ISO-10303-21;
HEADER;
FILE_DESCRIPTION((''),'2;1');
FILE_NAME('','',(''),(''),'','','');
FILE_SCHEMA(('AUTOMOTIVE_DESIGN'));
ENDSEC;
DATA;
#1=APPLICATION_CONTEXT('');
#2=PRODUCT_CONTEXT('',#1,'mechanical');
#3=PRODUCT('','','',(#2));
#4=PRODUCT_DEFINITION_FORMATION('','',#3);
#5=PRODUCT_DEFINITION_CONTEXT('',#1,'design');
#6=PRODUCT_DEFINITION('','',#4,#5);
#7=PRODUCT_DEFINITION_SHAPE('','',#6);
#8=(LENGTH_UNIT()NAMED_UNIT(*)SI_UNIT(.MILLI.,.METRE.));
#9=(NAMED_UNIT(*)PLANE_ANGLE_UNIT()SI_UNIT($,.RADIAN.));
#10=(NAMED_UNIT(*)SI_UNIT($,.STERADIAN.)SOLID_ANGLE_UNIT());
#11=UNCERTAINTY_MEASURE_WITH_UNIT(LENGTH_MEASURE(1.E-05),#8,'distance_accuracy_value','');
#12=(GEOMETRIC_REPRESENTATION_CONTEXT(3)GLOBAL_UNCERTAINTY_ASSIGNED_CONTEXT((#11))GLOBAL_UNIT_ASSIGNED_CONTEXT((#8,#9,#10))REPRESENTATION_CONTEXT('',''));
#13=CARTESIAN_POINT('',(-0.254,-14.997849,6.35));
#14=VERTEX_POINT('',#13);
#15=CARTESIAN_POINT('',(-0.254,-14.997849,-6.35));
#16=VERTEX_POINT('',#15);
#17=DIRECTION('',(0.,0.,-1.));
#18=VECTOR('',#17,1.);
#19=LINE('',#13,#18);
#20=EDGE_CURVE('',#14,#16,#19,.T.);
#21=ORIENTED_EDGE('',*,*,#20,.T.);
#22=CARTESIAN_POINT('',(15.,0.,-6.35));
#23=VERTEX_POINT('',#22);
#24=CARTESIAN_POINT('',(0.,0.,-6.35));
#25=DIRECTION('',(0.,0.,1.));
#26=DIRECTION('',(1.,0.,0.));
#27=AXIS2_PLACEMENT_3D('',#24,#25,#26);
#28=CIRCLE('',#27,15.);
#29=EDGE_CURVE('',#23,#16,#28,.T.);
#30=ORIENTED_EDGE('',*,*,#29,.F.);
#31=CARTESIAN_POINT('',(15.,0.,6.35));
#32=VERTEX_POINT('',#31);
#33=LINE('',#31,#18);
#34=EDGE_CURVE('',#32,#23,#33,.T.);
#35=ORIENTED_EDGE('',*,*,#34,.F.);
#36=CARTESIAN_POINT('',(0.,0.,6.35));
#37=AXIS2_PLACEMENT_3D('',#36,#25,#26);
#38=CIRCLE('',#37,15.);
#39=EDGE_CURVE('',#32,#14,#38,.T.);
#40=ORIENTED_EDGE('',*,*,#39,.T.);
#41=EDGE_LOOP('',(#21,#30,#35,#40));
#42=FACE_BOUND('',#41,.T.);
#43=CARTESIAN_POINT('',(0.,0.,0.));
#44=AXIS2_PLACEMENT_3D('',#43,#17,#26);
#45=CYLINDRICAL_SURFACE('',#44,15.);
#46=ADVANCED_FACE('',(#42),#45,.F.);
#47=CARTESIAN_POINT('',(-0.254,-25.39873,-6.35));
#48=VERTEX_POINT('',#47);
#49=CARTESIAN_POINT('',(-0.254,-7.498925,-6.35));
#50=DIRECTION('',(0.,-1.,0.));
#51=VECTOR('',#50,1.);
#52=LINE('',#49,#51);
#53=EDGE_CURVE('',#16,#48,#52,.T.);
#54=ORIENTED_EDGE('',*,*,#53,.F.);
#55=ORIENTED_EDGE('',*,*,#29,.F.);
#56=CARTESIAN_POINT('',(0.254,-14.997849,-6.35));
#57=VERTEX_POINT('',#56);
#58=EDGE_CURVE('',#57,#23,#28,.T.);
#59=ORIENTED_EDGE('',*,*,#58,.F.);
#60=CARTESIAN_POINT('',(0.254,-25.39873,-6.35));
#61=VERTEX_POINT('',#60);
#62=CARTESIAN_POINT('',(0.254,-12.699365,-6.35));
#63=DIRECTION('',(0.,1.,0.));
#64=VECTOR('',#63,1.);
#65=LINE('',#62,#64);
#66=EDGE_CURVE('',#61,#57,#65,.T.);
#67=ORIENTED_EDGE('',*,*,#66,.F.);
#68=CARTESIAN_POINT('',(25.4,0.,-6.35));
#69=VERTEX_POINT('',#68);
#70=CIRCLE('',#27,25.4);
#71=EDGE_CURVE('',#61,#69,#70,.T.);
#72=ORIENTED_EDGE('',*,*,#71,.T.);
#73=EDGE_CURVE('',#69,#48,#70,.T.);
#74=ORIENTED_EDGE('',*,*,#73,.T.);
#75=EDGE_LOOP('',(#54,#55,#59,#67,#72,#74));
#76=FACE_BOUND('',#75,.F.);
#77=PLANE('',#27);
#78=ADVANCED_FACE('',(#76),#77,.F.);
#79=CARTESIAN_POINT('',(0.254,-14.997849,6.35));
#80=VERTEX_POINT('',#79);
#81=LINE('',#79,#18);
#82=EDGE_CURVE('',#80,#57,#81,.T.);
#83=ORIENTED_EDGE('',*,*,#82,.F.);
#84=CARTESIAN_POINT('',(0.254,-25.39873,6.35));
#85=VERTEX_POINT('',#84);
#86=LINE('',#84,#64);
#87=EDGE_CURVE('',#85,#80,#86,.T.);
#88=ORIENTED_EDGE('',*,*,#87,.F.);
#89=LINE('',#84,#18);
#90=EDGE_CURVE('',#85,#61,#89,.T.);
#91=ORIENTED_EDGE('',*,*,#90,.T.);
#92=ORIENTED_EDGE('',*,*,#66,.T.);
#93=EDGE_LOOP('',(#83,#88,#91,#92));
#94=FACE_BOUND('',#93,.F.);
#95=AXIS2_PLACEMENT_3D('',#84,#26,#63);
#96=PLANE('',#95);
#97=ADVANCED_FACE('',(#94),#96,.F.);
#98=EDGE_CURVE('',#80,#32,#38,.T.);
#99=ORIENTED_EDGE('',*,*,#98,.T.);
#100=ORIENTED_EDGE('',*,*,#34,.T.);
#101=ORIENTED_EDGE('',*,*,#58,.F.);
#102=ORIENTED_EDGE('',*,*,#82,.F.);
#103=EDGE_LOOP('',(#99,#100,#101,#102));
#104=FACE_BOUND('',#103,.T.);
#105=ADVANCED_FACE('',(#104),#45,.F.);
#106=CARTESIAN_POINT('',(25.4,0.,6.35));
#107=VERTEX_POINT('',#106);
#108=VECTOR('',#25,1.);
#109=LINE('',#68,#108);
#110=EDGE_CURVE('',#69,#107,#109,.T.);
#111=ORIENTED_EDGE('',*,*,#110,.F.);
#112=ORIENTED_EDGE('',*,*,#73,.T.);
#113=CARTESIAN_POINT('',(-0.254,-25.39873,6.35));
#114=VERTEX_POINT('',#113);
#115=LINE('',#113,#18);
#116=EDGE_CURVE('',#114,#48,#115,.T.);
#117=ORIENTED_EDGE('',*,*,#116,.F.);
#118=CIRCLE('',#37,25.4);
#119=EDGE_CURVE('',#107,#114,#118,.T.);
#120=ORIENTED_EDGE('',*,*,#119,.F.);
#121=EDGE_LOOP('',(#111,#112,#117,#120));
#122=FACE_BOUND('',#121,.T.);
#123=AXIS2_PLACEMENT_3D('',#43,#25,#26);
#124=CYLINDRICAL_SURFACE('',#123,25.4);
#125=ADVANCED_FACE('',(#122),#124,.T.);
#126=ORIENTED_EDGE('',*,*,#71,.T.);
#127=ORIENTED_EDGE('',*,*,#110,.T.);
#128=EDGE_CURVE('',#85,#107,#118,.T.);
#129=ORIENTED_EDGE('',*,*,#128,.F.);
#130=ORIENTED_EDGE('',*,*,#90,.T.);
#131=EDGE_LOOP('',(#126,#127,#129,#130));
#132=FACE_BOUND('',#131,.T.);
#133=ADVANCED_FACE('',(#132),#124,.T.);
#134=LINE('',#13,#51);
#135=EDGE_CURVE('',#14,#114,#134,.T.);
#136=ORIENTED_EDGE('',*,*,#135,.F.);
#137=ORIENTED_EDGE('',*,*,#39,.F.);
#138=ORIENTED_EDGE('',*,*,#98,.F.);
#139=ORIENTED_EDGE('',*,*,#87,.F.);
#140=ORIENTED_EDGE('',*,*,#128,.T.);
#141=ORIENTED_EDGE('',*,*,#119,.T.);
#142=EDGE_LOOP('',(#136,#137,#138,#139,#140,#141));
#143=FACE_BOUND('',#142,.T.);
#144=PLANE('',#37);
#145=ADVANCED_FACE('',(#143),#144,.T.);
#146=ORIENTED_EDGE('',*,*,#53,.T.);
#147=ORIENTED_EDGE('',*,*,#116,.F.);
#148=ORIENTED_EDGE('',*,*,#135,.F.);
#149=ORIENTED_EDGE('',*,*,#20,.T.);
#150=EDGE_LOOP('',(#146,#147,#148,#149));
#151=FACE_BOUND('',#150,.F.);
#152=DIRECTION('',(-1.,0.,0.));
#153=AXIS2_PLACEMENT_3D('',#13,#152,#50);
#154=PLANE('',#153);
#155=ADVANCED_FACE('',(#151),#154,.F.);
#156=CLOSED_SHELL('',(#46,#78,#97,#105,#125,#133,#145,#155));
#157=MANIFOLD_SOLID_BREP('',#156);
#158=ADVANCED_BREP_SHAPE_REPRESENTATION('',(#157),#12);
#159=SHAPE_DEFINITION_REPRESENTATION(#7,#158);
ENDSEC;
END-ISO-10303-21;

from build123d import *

# Parameters (mm, degrees)
F0_R     = 25.4
F0_R_2   = 15
F1_DEPTH = 6.35
F3_DEPTH = 12.701


with BuildPart() as f1:
    # F0 (on Top) → F1 (new body, symmetric)
    with BuildSketch(Plane.XY):
        Circle(F0_R)
        Circle(F0_R_2, mode=Mode.SUBTRACT)
    extrude(amount=F1_DEPTH, both=True)

    # F2 (on face) → F3 (cut, through all)
    with BuildSketch(Plane.XY.offset(6.35)):
        with BuildLine():
            ThreePointArc((0.254, -14.9978493125), (0, -15), (-0.254, -14.9978493125))
            Line((-0.254, -14.9978493125), (-0.254, -25.3987299682))
            ThreePointArc((-0.254, -25.3987299682), (0, -25.4), (0.254, -25.3987299682))
            Line((0.254, -25.3987299682), (0.254, -14.9978493125))
        make_face()
    extrude(amount=-F3_DEPTH, mode=Mode.SUBTRACT)


solid = f1.part
